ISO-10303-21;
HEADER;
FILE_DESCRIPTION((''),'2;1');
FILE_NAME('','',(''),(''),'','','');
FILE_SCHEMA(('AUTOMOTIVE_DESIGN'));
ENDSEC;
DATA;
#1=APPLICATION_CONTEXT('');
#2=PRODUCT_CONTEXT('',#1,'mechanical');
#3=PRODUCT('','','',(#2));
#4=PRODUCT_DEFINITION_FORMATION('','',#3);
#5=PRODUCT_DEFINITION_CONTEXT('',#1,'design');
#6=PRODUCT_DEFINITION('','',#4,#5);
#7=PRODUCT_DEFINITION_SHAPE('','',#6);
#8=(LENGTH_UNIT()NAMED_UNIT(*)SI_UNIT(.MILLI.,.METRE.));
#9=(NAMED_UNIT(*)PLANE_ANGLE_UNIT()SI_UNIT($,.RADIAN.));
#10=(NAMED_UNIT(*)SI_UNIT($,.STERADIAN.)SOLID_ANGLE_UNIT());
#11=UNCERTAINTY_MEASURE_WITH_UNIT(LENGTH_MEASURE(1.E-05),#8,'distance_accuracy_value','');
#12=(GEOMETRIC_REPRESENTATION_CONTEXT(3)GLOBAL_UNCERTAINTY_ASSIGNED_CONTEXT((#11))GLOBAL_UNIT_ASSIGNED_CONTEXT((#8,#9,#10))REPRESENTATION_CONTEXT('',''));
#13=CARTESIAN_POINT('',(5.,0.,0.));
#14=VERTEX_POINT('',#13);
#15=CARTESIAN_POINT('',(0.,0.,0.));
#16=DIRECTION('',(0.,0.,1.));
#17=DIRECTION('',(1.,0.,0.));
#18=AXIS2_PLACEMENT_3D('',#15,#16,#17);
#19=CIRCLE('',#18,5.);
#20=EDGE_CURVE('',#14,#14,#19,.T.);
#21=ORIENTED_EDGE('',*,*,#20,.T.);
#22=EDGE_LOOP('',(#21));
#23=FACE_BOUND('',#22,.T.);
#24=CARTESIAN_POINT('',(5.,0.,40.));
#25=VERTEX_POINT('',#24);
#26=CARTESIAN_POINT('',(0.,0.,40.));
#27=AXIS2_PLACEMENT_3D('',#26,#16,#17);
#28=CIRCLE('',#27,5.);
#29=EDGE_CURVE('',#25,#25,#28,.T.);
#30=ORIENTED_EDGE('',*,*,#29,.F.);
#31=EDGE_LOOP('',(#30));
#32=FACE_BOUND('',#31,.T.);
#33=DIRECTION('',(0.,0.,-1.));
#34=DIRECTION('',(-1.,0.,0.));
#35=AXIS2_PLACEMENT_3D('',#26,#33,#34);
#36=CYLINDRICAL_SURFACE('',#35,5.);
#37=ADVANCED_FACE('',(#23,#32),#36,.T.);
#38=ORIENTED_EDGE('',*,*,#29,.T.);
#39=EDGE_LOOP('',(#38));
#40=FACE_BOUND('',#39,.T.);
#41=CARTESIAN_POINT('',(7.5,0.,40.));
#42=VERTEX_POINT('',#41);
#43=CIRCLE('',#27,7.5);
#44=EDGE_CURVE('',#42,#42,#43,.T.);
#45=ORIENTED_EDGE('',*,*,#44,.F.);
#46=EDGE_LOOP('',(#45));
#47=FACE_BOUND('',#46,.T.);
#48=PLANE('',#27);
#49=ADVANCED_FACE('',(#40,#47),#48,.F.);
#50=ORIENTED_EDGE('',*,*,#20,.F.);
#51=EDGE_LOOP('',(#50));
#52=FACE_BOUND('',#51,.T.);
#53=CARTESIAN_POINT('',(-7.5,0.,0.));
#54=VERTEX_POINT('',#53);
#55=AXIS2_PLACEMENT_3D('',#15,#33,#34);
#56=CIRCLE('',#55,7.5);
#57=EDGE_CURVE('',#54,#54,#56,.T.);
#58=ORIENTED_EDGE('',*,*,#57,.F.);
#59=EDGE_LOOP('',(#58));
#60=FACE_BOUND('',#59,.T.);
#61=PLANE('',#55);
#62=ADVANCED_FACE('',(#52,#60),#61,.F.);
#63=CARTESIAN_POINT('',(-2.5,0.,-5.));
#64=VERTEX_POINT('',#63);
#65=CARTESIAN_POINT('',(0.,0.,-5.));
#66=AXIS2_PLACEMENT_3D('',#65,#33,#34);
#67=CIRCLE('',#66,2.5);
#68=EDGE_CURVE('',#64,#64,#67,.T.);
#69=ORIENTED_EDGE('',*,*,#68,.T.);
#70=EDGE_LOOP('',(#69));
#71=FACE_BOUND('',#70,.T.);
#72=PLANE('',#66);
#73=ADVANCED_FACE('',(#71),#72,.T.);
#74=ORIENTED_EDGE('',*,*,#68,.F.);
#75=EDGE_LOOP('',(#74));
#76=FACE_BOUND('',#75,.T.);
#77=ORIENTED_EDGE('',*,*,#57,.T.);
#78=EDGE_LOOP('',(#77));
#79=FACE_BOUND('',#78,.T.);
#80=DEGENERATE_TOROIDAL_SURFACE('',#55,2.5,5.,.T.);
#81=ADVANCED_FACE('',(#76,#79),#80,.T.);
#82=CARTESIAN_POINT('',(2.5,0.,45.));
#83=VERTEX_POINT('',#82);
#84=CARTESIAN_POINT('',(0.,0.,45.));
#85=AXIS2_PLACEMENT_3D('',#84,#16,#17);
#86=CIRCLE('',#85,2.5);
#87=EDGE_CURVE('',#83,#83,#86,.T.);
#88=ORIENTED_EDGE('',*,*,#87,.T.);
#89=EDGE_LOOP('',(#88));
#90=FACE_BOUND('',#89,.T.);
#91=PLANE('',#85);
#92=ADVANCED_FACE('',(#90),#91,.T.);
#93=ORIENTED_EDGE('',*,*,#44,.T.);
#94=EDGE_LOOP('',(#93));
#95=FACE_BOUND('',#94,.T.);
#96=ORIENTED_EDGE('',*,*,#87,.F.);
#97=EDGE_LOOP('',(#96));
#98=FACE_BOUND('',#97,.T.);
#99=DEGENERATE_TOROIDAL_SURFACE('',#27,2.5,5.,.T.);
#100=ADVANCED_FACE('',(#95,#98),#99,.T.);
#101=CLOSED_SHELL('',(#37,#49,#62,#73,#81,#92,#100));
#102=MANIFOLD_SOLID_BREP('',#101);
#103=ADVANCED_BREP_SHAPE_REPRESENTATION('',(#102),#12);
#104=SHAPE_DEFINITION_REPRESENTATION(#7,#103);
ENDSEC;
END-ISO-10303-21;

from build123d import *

# Parameters (mm, degrees)
IZIM1_R                     = 5
Y_KSEKLIK_EKSTR_ZYON1_DEPTH = 40
IZIM2_R                     = 7.5
Y_KSEKLIK_EKSTR_ZYON2_DEPTH = 5
RADYUS1_R                   = 5
Y_KSEKLIK_EKSTR_ZYON3_START = 5
IZIM3_R                     = 7.5
Y_KSEKLIK_EKSTR_ZYON3_DEPTH = 5
RADYUS2_R                   = 5


with BuildPart() as part:
    # Çizim1 → Yükseklik-Ekstrüzyon1 (new body)
    with BuildSketch(Plane.XY):
        Circle(IZIM1_R)
    extrude(amount=Y_KSEKLIK_EKSTR_ZYON1_DEPTH)

    # Çizim2 → Yükseklik-Ekstrüzyon2 (add)
    with BuildSketch(Plane.XY.offset(40)):
        Circle(IZIM2_R)
    extrude(amount=Y_KSEKLIK_EKSTR_ZYON2_DEPTH)

    # Radyus1
    radyus1_edges = [part.edges().sort_by_distance(p)[0] for p in [
        (-7.5, 0, 45),
    ]]
    fillet(radyus1_edges, radius=RADYUS1_R - 0.0001)  # a hair under: the kernel refuses the full size

    # Çizim3 → Yükseklik-Ekstrüzyon3 (add)
    with BuildSketch(Plane(origin=(0, 0, 0), x_dir=(-1, 0, 0), z_dir=(0, 0, -1)).offset(Y_KSEKLIK_EKSTR_ZYON3_START)):
        Circle(IZIM3_R)
    extrude(amount=-Y_KSEKLIK_EKSTR_ZYON3_DEPTH)

    # Radyus2
    radyus2_edges = [part.edges().sort_by_distance(p)[0] for p in [
        (7.5, 0, -5),
    ]]
    fillet(radyus2_edges, radius=RADYUS2_R - 0.0001)  # a hair under: the kernel refuses the full size


solid = part.part
